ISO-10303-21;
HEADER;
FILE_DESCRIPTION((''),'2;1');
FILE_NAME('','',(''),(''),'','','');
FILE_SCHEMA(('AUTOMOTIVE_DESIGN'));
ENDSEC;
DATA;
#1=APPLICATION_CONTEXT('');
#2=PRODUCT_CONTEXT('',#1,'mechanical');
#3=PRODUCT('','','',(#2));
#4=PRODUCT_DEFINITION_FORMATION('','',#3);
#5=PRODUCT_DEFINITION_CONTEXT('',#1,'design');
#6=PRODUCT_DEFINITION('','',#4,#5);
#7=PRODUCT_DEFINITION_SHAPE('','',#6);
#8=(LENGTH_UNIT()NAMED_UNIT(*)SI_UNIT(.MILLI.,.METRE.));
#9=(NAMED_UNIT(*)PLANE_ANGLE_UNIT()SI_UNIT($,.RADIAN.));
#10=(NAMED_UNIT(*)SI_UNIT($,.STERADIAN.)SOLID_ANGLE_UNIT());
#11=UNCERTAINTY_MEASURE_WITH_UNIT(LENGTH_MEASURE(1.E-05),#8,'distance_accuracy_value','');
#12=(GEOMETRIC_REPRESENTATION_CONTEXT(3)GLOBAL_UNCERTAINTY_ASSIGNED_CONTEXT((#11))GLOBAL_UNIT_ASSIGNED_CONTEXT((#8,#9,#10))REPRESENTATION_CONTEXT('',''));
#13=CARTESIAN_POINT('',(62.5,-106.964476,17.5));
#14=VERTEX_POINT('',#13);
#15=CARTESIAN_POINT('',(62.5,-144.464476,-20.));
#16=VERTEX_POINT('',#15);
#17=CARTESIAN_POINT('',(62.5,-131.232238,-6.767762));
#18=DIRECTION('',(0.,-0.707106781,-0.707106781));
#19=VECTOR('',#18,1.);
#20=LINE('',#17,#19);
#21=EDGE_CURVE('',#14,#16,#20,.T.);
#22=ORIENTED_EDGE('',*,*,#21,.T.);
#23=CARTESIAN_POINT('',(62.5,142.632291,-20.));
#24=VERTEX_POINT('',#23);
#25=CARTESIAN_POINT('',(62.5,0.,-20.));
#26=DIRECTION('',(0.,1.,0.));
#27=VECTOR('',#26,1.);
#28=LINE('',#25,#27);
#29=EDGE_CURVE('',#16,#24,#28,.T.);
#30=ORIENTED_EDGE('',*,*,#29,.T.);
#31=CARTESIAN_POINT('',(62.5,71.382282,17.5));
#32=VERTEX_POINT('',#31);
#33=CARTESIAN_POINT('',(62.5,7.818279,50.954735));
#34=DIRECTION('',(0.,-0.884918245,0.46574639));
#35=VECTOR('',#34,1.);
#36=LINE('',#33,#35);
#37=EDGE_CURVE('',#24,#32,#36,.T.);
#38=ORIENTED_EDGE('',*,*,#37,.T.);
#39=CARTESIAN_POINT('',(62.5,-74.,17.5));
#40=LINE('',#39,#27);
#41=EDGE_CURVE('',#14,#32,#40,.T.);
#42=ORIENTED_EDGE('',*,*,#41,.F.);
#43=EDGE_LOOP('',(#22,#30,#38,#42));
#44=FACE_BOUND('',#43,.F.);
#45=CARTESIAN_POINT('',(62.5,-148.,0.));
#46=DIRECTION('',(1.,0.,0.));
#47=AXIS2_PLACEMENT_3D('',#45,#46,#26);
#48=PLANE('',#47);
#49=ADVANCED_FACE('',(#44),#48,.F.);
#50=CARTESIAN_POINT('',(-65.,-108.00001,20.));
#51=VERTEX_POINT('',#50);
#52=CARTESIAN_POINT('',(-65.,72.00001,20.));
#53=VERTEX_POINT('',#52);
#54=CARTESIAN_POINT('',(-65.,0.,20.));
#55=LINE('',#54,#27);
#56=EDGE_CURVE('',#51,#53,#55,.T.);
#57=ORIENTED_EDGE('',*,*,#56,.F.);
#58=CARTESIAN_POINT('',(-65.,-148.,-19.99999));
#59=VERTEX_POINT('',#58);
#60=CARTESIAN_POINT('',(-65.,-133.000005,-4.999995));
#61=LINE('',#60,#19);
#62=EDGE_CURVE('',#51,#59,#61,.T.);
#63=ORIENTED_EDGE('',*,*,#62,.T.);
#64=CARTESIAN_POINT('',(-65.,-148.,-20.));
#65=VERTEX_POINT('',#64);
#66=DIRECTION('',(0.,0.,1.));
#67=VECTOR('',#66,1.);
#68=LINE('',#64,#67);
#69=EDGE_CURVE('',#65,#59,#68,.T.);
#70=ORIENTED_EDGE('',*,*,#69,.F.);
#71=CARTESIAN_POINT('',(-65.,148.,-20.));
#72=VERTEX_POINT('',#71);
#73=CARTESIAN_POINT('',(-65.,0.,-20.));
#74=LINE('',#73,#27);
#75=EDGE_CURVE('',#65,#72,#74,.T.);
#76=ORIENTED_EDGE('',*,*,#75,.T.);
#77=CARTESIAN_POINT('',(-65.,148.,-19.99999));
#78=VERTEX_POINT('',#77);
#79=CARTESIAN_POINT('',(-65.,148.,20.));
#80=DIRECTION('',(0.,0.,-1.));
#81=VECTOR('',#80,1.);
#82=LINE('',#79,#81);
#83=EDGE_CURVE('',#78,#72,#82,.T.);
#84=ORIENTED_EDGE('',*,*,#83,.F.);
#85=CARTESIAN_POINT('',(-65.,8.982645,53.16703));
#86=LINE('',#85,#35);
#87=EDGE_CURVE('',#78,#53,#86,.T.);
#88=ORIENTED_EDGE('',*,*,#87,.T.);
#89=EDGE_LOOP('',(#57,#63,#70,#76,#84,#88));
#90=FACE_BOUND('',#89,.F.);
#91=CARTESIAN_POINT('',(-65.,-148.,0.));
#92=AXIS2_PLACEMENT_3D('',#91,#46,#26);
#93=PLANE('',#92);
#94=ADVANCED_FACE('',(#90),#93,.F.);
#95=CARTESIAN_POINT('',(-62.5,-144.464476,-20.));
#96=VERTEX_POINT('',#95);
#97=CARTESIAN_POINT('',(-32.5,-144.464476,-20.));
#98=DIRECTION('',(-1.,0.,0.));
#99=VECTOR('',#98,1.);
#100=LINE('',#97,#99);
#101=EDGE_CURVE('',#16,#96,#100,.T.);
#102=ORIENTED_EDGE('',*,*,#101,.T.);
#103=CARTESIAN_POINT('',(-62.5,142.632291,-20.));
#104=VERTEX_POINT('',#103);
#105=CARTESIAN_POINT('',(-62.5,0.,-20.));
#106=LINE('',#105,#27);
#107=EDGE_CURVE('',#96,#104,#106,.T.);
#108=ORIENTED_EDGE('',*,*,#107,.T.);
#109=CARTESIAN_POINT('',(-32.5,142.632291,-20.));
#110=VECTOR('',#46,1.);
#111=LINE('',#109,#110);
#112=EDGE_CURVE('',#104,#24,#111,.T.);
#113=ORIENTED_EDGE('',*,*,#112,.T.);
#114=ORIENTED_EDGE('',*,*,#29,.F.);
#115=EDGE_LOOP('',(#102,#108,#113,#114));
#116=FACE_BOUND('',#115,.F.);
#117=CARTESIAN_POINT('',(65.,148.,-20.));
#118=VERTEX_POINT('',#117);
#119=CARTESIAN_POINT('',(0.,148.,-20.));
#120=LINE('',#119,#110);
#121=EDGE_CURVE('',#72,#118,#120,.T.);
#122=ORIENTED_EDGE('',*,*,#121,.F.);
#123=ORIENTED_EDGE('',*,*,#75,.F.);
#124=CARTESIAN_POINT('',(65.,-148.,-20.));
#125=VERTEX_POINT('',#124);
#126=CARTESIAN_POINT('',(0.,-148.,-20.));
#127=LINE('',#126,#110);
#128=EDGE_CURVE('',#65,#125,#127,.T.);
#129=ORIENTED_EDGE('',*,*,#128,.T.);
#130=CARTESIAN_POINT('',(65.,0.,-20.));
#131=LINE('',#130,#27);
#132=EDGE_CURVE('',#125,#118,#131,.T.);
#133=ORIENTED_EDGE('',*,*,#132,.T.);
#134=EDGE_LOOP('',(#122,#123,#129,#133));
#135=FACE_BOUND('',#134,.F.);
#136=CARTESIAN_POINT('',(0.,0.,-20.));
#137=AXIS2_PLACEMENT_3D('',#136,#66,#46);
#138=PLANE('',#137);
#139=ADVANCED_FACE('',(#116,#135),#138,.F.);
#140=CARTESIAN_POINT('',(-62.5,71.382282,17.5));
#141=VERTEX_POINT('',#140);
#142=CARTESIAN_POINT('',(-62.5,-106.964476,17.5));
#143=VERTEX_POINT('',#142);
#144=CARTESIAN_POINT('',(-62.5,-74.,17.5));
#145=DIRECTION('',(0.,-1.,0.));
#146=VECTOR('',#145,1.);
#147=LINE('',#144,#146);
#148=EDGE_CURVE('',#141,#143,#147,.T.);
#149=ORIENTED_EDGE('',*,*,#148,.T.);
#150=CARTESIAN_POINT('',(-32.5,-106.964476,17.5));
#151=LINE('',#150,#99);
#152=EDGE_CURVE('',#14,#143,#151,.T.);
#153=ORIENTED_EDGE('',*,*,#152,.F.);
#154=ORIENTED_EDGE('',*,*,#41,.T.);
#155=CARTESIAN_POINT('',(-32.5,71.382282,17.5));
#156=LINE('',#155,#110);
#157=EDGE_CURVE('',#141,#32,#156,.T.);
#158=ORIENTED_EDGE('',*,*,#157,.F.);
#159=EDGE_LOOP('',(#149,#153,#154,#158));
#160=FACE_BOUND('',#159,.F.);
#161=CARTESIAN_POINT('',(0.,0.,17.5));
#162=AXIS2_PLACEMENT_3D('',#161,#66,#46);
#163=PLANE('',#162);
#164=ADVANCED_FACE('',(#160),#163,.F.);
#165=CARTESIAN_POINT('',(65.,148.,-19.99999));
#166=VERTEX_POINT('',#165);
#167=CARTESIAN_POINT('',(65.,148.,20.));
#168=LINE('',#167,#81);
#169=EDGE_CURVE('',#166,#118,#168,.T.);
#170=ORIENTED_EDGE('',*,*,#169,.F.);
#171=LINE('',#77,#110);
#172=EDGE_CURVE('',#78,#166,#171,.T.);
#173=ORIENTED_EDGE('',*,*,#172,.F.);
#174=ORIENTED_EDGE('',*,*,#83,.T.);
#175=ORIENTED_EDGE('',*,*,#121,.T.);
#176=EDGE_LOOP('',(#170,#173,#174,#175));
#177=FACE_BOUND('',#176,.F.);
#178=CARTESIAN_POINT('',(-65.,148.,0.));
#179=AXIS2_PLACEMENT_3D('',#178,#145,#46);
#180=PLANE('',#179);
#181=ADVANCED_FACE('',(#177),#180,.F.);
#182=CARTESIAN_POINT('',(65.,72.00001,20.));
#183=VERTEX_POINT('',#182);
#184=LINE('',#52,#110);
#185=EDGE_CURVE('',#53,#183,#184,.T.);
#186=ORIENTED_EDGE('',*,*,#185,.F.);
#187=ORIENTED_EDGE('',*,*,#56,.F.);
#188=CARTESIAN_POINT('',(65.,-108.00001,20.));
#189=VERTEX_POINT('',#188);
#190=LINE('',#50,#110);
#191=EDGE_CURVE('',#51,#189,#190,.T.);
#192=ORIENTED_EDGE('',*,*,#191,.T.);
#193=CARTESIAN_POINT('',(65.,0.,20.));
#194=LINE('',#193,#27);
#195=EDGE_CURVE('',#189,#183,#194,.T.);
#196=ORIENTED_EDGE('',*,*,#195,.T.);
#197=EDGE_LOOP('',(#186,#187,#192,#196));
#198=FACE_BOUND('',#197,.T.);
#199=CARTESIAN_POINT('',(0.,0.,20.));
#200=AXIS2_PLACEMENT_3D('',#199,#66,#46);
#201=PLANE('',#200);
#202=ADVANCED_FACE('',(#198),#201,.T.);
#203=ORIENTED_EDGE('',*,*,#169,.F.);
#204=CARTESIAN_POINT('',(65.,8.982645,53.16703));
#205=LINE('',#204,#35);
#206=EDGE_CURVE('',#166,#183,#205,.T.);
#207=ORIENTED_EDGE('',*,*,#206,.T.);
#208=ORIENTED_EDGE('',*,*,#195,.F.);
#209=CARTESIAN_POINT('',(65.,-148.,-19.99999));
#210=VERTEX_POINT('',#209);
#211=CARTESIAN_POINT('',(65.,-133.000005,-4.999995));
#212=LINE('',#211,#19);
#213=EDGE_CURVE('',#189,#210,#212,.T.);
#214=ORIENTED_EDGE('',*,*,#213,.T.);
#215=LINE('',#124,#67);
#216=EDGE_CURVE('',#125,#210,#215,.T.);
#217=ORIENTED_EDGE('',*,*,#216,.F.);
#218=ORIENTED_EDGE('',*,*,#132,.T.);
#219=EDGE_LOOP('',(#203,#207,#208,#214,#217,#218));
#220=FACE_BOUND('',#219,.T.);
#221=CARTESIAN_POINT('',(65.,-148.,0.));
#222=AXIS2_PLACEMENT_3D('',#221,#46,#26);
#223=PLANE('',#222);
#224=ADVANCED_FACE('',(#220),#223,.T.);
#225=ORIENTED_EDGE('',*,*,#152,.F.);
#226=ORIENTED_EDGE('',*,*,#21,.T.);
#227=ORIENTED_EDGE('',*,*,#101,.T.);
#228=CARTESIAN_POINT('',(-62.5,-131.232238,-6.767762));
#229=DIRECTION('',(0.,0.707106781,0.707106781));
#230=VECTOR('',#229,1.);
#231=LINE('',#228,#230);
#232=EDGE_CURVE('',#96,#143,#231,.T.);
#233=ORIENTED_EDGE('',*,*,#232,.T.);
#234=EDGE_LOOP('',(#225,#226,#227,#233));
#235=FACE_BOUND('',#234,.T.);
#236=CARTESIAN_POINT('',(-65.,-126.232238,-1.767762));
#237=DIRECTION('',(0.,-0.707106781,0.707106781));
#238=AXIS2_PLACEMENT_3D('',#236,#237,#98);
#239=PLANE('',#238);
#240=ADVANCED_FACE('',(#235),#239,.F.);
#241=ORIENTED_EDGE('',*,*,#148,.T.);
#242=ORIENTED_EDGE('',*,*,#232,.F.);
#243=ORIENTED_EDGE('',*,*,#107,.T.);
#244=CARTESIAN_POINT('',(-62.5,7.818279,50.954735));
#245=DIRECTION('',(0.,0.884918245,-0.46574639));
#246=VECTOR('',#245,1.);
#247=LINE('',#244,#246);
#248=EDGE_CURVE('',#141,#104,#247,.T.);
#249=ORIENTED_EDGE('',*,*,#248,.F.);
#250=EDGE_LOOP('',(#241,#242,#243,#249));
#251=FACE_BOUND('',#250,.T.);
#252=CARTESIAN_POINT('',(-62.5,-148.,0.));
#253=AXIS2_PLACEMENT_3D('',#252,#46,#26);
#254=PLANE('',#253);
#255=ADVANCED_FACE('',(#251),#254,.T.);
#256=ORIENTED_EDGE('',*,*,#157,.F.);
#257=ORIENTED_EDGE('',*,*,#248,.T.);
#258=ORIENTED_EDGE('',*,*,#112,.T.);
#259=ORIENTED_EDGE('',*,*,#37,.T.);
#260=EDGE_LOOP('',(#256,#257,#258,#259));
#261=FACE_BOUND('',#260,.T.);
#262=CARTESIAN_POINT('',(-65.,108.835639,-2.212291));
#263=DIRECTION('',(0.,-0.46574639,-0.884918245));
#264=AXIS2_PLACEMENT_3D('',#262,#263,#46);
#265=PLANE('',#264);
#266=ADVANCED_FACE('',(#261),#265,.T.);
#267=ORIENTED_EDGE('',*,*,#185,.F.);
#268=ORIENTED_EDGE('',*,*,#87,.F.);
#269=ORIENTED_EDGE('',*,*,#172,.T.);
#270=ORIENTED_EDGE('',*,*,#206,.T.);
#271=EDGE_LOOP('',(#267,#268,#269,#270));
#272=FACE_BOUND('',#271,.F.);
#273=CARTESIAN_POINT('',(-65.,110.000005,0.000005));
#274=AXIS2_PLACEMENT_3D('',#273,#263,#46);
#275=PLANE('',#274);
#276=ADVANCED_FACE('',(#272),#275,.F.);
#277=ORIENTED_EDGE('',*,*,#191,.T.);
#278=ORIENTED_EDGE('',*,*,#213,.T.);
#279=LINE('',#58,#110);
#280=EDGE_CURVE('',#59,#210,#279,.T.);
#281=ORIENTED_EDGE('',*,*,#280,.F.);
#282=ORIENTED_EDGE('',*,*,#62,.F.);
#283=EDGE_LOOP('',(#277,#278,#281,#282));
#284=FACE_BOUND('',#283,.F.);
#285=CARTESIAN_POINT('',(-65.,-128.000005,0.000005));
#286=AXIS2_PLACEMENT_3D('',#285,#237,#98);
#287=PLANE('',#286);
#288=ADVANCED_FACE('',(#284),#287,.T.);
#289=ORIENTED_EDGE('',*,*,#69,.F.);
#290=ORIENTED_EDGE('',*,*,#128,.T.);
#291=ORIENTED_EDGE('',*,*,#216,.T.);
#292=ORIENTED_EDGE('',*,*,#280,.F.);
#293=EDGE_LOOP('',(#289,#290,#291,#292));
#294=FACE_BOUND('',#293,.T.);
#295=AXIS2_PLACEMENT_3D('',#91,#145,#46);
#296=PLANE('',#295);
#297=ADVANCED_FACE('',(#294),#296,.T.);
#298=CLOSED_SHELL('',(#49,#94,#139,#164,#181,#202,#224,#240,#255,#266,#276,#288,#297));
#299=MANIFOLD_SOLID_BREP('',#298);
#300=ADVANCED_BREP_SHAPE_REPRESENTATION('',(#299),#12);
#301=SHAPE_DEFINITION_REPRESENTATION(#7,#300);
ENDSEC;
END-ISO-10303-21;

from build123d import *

# Parameters (mm, degrees)
F0_W     = 130
F0_H     = 296
F1_DEPTH = 20
F2_SIZE2 = 75.99999
F2_SIZE  = 39.99999
F3_SIZE2 = 39.99999
F3_SIZE  = 39.99999
F4_T     = 2.5


# Not quite as in the source:
# - a fillet or chamfer is up to 0.001 mm smaller than in the source, because OpenCascade refuses the exact size
# - a shell that OpenCascade refuses in one call is made with other operations: the cavity is built on its own and cut out


with BuildPart() as f1:
    # F0 (on Top) → F1 (new body, symmetric)
    with BuildSketch(Plane.XY):
        Rectangle(F0_W, F0_H)
    extrude(amount=F1_DEPTH, both=True)

    # F2 (size 40 and 76 in the source; OpenCascade refuses exactly that, so slightly less here)
    f2_edges = [f1.edges().sort_by_distance(p)[0] for p in [
        (0, 148, 20),
    ]]
    f2_side = f1.faces().sort_by_distance((0, 148, 0))[0]
    chamfer(f2_edges, length=F2_SIZE, length2=F2_SIZE2, reference=f2_side)

    # F3 (size 40 and 40 in the source; OpenCascade refuses exactly that, so slightly less here)
    f3_edges = [f1.edges().sort_by_distance(p)[0] for p in [
        (0, -148, 20),
    ]]
    chamfer(f3_edges, length=F3_SIZE, length2=F3_SIZE2)

    # F4: shell of thickness 2.5, made by hand


with BuildPart() as f4_core1:
    # F4_t2: copy of F1
    add(f1.part)

    # the walls: a layer under each face that stays
    f4_faces = [f4_core1.faces().sort_by_distance(p)[0] for p in [
        (-65, 0, 0),
        (0, -18, 20),
        (0, -128.000005, 5e-06),
        (0, 110.000005, 5e-06),
        (0, -148, -19.999995),
        (0, 148, -19.999995),
        (65, 0, 0),
    ]]
    thicken(f4_faces, amount=-F4_T, mode=Mode.SUBTRACT)


with BuildPart() as f1_1:
    add(f1.part)

    # what is left inside the walls is the cavity
    f4_cavity = [f4_core1.part.solids().sort_by_distance(p)[0] for p in [
        (0, -48.765554, -19.975),
    ]]
    add(f4_cavity, mode=Mode.SUBTRACT)


solid = f1_1.part
